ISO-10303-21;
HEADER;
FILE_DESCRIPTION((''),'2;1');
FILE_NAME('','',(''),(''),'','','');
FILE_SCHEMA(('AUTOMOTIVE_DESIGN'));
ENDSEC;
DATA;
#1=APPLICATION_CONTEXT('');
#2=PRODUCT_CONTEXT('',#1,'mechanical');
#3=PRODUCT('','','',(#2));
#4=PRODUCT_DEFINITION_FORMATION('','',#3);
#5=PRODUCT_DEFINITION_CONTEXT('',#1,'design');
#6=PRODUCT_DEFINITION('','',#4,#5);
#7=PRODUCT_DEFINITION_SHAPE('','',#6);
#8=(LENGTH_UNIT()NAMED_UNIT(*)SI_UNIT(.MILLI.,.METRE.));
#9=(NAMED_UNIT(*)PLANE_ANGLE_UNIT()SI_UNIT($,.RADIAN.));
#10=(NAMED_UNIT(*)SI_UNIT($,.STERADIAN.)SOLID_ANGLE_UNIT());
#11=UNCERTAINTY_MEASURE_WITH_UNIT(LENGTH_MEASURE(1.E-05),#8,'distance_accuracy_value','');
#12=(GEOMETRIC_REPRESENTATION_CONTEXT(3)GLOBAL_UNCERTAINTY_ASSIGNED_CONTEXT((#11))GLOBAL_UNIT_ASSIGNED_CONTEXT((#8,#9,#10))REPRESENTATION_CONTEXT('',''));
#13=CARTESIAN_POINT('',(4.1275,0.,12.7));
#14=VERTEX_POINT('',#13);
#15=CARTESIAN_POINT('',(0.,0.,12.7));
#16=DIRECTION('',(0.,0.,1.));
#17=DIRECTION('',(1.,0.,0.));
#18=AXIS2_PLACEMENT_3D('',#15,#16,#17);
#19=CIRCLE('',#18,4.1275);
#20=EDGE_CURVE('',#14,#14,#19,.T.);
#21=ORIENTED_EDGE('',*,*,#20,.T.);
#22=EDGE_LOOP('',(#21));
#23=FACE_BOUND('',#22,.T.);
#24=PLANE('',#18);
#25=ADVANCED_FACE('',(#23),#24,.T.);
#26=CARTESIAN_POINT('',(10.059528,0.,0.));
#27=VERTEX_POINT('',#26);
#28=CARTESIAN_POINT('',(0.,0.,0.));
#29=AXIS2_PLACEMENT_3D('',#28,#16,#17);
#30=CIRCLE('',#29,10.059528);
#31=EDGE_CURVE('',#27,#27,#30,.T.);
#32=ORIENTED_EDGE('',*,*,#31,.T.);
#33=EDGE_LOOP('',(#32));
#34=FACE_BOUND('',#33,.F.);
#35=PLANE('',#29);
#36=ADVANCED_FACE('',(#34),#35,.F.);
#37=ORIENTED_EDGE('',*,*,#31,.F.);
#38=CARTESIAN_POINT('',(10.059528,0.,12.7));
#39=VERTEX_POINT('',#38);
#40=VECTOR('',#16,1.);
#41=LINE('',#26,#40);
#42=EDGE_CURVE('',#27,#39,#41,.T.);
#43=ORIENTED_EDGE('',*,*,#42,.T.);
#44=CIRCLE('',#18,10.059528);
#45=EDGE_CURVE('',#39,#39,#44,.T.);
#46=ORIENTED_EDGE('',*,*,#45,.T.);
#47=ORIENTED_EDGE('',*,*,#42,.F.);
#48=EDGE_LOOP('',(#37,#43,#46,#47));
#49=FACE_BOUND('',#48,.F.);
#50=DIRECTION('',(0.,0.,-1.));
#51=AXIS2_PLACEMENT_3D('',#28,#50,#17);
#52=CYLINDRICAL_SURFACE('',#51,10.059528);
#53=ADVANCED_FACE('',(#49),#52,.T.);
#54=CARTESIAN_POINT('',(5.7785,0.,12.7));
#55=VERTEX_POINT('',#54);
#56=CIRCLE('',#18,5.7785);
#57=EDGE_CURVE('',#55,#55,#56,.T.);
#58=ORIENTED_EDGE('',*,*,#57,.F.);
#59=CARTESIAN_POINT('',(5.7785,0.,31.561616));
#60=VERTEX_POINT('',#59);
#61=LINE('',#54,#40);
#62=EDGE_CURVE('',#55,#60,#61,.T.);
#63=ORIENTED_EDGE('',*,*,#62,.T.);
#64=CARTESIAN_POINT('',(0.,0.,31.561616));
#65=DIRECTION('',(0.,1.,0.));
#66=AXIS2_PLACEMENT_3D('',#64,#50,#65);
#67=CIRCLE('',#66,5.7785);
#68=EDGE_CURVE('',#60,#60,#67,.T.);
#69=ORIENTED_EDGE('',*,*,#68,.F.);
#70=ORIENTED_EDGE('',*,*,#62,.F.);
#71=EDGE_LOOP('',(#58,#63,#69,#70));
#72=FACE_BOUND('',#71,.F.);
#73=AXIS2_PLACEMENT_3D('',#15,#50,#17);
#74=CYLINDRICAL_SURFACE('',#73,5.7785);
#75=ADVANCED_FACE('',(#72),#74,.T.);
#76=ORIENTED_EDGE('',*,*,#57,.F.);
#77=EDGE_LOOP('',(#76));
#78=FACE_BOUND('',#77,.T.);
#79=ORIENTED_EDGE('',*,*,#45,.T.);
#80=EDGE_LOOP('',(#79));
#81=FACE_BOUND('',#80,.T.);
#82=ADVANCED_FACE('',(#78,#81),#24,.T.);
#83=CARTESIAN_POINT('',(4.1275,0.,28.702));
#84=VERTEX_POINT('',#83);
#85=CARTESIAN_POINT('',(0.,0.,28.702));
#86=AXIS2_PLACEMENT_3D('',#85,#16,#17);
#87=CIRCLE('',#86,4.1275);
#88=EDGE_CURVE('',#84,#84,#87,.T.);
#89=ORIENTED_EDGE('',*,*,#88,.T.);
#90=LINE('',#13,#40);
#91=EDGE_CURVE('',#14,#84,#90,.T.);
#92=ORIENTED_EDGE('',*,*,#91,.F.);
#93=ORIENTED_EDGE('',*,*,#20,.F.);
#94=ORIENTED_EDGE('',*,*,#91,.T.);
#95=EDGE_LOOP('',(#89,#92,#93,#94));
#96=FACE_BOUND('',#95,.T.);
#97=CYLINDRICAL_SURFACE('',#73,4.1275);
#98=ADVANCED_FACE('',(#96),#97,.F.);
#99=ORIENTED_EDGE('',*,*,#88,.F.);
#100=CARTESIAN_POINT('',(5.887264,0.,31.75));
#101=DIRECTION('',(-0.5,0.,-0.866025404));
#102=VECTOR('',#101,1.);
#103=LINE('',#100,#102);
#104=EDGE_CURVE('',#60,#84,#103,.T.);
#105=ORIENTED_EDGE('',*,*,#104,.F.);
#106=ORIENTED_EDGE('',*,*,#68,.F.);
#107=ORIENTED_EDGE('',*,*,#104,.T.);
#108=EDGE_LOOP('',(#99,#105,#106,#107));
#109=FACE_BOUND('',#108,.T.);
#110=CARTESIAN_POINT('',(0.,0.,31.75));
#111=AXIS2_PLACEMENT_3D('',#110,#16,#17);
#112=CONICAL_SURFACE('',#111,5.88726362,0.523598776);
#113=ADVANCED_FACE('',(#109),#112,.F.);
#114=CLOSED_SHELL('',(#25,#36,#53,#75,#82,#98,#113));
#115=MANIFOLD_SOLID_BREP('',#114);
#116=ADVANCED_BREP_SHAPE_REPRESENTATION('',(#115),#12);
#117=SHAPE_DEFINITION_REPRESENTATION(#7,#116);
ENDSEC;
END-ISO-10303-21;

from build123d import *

# Parameters (mm, degrees)
F0_R     = 10.0595284502
F1_DEPTH = 12.7
F2_R     = 5.7785
F2_R_2   = 4.1275
F3_DEPTH = 19.05


# Not quite as in the source:
# - a fillet or chamfer that OpenCascade refuses, or shapes differently, is made with other operations: its cross-section is extruded or revolved along the edge and cut away or added


with BuildPart() as f1:
    # F0 (on Top) → F1 (new body)
    with BuildSketch(Plane.XY):
        Circle(F0_R)
    extrude(amount=F1_DEPTH)

    # F2 (on face) → F3 (join)
    with BuildSketch(Plane.XY.offset(12.7)):
        Circle(F2_R)
        Circle(F2_R_2, mode=Mode.SUBTRACT)
    extrude(amount=F3_DEPTH)

    # F4: chamfer of 3.048 x 1.7597636205 on 1 edges, made by hand

    # F4_s1 → F4_t2 (revolve, cut)
    with BuildSketch(Plane.XZ):
        Polygon((5.8872636205, 31.75), (4.1275, 28.702), (4.1275, 31.75), align=None)
    revolve(axis=Axis((0, 0, 31.75), (0, 0, 1)), mode=Mode.SUBTRACT)


solid = f1.part
